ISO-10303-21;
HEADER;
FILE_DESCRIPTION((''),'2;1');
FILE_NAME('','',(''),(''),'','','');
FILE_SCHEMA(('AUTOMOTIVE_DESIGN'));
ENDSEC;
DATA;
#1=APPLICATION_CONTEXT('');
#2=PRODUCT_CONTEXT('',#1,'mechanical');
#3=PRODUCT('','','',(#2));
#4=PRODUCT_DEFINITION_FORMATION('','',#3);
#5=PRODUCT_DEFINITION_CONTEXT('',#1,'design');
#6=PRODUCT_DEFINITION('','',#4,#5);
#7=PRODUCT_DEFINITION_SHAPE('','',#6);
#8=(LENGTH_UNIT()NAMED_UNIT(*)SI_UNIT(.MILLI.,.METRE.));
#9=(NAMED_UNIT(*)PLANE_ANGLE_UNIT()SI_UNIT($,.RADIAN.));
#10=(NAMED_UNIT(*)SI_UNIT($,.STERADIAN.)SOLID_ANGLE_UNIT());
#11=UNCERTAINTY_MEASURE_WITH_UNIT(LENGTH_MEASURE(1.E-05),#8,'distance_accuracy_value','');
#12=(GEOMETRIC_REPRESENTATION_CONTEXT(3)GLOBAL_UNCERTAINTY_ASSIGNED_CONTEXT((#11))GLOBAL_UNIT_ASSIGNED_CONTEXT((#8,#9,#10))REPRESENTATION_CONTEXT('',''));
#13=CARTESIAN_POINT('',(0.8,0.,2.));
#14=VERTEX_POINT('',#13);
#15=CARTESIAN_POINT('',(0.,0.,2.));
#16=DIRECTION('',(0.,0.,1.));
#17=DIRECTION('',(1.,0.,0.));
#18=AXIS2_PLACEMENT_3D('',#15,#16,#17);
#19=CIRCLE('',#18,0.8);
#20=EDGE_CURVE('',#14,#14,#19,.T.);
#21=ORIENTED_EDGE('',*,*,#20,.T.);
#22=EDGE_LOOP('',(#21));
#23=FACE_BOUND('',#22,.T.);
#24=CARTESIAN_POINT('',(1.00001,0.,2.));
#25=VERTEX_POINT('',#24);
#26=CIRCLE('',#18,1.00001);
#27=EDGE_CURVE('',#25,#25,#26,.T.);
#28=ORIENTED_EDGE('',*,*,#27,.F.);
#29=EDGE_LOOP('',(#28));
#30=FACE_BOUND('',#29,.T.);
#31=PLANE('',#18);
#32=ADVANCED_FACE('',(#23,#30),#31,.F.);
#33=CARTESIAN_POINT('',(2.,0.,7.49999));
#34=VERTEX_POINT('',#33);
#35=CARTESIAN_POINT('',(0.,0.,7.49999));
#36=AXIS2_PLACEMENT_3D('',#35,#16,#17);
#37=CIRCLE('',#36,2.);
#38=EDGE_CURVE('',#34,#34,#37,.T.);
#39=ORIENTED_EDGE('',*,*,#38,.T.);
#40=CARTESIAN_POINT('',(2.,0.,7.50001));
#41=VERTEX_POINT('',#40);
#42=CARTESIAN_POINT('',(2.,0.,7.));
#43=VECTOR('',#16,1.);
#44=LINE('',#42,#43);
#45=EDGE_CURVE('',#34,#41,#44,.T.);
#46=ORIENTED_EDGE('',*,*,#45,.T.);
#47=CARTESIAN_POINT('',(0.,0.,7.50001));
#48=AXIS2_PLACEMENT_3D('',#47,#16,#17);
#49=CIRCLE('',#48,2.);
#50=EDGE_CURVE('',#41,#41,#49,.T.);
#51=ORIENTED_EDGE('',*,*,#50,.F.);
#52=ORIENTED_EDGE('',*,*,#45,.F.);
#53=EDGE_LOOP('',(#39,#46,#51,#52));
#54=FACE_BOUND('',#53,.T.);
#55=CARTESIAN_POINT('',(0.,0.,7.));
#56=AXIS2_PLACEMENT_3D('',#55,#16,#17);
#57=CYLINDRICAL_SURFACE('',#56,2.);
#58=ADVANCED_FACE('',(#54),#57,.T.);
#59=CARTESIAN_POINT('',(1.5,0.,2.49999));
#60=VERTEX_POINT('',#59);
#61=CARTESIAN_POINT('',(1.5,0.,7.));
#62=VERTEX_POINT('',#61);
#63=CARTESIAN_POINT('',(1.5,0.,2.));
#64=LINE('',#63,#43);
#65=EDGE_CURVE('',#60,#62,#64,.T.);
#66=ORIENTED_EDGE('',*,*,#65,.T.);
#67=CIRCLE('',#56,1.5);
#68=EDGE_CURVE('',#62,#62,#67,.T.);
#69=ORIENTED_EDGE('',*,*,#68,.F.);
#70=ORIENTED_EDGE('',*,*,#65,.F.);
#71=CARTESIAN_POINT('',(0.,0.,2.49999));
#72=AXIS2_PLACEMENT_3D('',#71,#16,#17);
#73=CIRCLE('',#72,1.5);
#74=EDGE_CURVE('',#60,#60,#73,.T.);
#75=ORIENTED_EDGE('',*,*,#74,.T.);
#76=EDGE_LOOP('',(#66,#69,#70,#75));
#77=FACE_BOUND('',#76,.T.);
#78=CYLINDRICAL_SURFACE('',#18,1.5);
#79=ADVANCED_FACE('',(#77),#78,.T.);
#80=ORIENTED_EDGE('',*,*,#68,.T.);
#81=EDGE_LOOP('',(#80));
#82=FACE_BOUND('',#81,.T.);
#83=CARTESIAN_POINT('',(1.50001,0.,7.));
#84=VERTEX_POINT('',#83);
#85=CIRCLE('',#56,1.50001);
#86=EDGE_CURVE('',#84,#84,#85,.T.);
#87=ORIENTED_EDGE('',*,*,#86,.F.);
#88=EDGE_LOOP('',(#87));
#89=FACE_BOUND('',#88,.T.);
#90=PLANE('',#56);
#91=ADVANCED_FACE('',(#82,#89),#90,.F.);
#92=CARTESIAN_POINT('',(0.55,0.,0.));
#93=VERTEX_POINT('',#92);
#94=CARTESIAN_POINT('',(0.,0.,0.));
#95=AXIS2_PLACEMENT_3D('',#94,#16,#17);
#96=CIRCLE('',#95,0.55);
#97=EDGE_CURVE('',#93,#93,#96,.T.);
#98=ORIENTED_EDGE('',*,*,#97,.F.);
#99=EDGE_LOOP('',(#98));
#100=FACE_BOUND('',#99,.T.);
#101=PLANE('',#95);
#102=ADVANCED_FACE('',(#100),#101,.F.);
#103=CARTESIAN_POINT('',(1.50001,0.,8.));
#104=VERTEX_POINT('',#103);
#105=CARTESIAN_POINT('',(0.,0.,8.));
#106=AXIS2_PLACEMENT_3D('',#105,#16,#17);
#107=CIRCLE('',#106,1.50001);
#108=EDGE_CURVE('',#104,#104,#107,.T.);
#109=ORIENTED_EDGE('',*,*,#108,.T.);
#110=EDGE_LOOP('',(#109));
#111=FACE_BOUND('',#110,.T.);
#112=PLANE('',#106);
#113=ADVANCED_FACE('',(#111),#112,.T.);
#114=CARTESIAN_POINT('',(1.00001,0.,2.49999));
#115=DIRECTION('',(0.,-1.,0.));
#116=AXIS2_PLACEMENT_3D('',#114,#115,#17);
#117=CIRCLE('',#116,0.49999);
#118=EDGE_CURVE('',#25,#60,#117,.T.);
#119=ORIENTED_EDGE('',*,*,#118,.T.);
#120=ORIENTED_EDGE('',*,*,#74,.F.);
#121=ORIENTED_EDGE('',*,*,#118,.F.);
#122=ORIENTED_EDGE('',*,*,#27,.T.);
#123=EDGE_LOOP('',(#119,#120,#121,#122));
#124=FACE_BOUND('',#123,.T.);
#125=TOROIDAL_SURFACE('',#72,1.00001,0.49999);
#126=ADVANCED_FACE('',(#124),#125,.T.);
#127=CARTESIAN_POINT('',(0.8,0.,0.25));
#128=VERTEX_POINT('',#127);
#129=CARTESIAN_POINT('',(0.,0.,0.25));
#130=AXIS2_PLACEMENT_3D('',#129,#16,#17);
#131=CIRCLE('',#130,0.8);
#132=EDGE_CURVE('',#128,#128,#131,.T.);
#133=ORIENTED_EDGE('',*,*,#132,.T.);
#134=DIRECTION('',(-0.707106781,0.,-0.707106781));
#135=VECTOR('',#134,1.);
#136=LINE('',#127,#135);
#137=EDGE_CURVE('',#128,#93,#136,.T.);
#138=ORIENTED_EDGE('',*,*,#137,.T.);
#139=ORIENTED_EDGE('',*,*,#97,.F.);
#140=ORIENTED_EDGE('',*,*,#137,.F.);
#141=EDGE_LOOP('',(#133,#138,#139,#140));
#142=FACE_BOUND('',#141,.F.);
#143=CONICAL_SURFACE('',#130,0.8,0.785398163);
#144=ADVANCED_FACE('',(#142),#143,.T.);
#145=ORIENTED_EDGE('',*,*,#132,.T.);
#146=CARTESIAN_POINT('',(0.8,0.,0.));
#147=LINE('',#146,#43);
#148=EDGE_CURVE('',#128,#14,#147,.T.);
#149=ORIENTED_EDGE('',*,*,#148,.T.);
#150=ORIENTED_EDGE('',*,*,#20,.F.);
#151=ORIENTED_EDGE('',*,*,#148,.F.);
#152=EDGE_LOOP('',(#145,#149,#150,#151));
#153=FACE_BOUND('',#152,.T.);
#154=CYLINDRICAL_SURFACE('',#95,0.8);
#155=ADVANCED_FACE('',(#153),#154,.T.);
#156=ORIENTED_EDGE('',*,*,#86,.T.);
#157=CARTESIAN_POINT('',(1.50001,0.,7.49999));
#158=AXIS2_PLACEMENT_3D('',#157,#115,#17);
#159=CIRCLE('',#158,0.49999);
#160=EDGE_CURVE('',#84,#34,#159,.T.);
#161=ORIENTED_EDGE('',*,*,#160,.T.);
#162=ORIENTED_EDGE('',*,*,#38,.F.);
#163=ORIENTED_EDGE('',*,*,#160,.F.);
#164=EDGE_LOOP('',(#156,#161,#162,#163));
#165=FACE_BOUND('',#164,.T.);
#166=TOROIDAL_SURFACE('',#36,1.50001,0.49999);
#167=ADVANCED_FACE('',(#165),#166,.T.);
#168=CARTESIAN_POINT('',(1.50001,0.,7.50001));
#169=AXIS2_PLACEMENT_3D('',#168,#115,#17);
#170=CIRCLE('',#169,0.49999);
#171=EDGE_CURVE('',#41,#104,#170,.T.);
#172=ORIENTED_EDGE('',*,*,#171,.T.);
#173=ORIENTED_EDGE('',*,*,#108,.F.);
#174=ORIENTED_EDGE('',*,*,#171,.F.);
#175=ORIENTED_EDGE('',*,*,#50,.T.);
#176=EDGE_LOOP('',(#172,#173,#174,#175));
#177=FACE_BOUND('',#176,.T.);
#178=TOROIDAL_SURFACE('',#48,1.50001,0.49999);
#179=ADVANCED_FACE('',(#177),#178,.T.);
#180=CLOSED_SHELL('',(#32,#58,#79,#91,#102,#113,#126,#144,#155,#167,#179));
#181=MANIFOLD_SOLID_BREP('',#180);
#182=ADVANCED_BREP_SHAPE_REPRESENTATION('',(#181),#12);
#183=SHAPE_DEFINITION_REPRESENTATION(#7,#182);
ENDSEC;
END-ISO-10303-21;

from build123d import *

# Parameters (mm, degrees)
F2_R     = 0.49999
F3_SIZE2 = 0.25
F3_SIZE  = 0.25


# Not quite as in the source:
# - a fillet or chamfer is up to 0.001 mm smaller than in the source, because OpenCascade refuses the exact size


with BuildPart() as f1:
    # F0 (on Front) → F1 (revolve)
    with BuildSketch(Plane.XZ):
        Polygon((0, 8), (0, 0), (0.8, 0), (0.8, 2), (1.5, 2), (1.5, 7), (2, 7), (2, 8), align=None)
    revolve(axis=Axis((0, 0, 4), (0, 0, 1)))

    # F2 (radius 0.5 in the source; OpenCascade refuses exactly that, so slightly less here)
    f2_edges = [f1.edges().sort_by_distance(p)[0] for p in [
        (-2, 0, 7),
        (-2, 0, 8),
        (2, 0, 7.5),
        (-1.5, 0, 2),
    ]]
    fillet(f2_edges, radius=F2_R)

    # F3
    f3_edges = [f1.edges().sort_by_distance(p)[0] for p in [
        (-0.8, 0, 0),
    ]]
    chamfer(f3_edges, length=F3_SIZE, length2=F3_SIZE2)


solid = f1.part
